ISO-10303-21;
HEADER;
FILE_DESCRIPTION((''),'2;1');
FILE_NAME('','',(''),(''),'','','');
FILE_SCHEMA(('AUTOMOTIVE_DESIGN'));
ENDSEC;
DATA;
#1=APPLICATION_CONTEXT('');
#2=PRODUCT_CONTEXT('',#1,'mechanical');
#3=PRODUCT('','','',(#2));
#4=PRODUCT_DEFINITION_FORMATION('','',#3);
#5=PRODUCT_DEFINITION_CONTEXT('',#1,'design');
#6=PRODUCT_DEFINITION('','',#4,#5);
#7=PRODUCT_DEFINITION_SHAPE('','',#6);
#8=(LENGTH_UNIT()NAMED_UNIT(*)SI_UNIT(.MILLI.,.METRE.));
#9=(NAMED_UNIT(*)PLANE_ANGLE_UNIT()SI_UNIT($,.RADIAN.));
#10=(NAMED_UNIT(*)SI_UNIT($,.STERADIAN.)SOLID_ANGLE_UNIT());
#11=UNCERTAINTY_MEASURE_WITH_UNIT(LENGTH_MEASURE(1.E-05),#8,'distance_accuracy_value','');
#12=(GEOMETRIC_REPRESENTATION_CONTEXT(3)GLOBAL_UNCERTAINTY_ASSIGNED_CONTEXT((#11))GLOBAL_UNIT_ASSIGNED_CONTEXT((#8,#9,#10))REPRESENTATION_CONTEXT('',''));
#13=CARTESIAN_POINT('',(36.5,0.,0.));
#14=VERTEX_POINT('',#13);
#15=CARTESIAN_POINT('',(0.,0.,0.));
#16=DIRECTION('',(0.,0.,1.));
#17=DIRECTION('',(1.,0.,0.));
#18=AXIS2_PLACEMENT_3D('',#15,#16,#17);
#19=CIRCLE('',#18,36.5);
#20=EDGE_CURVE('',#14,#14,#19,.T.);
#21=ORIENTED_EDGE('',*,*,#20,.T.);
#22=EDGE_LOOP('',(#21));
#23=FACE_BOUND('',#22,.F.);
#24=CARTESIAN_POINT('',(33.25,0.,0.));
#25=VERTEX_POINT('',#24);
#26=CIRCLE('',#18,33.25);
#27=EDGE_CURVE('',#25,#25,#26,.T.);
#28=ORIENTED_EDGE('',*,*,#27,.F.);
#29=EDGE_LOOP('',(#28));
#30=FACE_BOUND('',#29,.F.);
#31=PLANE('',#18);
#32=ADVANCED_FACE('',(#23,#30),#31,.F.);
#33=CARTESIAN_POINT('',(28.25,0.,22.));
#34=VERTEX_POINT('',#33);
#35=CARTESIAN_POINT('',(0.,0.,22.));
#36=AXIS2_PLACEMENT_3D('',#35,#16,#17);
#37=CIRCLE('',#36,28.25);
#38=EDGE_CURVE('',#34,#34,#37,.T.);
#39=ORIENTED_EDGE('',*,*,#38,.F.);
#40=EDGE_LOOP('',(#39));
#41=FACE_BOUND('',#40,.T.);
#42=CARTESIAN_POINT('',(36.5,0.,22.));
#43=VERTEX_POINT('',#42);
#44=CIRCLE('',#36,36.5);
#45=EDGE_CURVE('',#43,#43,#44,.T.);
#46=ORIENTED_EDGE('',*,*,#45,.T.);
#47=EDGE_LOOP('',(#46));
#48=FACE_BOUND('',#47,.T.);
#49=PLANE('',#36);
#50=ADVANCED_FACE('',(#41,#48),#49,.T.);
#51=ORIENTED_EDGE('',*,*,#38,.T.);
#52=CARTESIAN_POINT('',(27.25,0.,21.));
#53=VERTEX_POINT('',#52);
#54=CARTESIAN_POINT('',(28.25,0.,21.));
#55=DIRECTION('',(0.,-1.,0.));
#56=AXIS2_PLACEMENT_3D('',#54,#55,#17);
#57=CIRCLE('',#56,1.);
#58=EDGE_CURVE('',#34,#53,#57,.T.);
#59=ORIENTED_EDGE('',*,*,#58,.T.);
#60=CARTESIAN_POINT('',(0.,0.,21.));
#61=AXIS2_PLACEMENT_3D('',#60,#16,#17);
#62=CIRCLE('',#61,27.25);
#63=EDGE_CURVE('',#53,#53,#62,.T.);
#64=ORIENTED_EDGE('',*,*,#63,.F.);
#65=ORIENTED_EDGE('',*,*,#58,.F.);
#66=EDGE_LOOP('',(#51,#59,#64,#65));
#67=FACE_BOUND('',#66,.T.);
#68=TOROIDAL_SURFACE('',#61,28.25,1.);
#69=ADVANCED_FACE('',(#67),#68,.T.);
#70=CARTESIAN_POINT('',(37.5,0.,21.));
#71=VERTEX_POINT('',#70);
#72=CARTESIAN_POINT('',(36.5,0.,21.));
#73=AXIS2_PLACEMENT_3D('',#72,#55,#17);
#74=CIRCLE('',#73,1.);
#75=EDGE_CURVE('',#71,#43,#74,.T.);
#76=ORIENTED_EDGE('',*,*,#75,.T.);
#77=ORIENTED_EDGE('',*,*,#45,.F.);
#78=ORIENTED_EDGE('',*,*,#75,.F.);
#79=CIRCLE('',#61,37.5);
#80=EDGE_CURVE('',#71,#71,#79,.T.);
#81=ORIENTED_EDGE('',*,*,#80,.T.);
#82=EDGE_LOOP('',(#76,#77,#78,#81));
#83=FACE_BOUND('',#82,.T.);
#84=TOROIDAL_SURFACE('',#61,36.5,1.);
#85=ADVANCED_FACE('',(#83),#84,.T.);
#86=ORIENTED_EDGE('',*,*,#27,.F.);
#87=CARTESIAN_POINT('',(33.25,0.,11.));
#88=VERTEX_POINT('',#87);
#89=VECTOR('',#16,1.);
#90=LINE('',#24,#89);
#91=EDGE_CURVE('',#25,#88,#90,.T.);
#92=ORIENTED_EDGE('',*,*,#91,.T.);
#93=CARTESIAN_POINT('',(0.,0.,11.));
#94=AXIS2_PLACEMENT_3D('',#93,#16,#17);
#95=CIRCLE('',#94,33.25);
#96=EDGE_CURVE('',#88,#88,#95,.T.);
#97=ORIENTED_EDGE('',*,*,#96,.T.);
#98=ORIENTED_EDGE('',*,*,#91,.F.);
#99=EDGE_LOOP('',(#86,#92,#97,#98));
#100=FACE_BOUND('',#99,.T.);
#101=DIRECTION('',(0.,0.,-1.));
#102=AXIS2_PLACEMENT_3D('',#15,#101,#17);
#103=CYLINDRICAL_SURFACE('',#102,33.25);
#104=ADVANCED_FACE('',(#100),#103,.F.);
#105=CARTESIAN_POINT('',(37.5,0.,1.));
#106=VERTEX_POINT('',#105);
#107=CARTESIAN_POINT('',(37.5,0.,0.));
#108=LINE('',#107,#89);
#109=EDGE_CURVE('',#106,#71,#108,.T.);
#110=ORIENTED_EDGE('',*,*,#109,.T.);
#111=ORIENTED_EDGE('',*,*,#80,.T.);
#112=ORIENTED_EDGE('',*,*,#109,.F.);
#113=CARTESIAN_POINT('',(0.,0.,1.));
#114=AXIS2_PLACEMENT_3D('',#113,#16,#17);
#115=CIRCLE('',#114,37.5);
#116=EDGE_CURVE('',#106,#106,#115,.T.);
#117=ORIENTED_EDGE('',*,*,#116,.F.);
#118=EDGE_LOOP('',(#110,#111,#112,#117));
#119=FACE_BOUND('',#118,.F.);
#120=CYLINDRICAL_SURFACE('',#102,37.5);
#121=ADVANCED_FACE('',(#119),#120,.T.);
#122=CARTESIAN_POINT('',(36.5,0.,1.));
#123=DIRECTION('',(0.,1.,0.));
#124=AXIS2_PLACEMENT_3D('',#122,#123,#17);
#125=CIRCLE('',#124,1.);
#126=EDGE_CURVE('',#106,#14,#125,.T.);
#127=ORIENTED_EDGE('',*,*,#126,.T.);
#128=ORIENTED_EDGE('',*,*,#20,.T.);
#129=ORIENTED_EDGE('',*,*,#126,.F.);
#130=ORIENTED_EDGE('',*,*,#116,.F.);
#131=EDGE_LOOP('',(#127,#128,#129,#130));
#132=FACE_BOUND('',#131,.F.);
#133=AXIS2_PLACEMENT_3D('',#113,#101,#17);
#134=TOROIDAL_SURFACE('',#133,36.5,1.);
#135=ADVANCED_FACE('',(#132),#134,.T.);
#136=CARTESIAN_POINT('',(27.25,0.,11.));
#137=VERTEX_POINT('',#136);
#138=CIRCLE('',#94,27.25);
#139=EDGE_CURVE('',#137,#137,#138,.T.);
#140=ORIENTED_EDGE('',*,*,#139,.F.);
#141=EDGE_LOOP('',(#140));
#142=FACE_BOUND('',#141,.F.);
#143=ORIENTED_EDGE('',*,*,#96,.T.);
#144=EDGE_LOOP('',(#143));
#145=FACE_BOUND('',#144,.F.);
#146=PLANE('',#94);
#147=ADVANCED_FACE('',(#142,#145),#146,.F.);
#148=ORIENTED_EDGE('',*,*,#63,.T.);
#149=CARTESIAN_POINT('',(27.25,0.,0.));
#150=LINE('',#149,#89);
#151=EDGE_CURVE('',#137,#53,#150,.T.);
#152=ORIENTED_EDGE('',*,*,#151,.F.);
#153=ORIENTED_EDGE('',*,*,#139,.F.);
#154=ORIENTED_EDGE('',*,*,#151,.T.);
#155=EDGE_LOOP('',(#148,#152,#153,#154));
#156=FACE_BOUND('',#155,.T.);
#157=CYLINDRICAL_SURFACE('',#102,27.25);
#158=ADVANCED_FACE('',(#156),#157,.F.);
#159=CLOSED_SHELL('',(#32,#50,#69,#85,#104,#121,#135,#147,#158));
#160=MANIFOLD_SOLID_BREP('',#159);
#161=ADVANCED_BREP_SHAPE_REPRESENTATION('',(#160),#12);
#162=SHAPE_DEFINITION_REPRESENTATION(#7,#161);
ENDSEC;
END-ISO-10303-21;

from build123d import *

# Parameters (mm, degrees)
F2_R     = 37.5
F2_R_2   = 33.25
F2_R_3   = 27.25
F3_DEPTH = 22
F4_DEPTH = 11
F5_R     = 1


# Not quite as in the source:
# - a feature of the source that left no trace in its solid (it failed there, or was rolled back) is left out


with BuildPart() as f3:
    # F2 (on Top) → F3 (new body)
    with BuildSketch(Plane.XY):
        Circle(F2_R)
        Circle(F2_R_2, mode=Mode.SUBTRACT)
        Circle(F2_R_2)
        Circle(F2_R_3, mode=Mode.SUBTRACT)
    extrude(amount=F3_DEPTH)

    # F2 (on Top) → F4 (cut)
    with BuildSketch(Plane.XY):
        Circle(F2_R_2)
        Circle(F2_R_3, mode=Mode.SUBTRACT)
    extrude(amount=F4_DEPTH, mode=Mode.SUBTRACT)

    # F5
    f5_edges = [f3.edges().sort_by_distance(p)[0] for p in [
        (-37.5, 0, 22),
        (-27.25, 0, 22),
        (-37.5, 0, 0),
    ]]
    fillet(f5_edges, radius=F5_R)


solid = f3.part
